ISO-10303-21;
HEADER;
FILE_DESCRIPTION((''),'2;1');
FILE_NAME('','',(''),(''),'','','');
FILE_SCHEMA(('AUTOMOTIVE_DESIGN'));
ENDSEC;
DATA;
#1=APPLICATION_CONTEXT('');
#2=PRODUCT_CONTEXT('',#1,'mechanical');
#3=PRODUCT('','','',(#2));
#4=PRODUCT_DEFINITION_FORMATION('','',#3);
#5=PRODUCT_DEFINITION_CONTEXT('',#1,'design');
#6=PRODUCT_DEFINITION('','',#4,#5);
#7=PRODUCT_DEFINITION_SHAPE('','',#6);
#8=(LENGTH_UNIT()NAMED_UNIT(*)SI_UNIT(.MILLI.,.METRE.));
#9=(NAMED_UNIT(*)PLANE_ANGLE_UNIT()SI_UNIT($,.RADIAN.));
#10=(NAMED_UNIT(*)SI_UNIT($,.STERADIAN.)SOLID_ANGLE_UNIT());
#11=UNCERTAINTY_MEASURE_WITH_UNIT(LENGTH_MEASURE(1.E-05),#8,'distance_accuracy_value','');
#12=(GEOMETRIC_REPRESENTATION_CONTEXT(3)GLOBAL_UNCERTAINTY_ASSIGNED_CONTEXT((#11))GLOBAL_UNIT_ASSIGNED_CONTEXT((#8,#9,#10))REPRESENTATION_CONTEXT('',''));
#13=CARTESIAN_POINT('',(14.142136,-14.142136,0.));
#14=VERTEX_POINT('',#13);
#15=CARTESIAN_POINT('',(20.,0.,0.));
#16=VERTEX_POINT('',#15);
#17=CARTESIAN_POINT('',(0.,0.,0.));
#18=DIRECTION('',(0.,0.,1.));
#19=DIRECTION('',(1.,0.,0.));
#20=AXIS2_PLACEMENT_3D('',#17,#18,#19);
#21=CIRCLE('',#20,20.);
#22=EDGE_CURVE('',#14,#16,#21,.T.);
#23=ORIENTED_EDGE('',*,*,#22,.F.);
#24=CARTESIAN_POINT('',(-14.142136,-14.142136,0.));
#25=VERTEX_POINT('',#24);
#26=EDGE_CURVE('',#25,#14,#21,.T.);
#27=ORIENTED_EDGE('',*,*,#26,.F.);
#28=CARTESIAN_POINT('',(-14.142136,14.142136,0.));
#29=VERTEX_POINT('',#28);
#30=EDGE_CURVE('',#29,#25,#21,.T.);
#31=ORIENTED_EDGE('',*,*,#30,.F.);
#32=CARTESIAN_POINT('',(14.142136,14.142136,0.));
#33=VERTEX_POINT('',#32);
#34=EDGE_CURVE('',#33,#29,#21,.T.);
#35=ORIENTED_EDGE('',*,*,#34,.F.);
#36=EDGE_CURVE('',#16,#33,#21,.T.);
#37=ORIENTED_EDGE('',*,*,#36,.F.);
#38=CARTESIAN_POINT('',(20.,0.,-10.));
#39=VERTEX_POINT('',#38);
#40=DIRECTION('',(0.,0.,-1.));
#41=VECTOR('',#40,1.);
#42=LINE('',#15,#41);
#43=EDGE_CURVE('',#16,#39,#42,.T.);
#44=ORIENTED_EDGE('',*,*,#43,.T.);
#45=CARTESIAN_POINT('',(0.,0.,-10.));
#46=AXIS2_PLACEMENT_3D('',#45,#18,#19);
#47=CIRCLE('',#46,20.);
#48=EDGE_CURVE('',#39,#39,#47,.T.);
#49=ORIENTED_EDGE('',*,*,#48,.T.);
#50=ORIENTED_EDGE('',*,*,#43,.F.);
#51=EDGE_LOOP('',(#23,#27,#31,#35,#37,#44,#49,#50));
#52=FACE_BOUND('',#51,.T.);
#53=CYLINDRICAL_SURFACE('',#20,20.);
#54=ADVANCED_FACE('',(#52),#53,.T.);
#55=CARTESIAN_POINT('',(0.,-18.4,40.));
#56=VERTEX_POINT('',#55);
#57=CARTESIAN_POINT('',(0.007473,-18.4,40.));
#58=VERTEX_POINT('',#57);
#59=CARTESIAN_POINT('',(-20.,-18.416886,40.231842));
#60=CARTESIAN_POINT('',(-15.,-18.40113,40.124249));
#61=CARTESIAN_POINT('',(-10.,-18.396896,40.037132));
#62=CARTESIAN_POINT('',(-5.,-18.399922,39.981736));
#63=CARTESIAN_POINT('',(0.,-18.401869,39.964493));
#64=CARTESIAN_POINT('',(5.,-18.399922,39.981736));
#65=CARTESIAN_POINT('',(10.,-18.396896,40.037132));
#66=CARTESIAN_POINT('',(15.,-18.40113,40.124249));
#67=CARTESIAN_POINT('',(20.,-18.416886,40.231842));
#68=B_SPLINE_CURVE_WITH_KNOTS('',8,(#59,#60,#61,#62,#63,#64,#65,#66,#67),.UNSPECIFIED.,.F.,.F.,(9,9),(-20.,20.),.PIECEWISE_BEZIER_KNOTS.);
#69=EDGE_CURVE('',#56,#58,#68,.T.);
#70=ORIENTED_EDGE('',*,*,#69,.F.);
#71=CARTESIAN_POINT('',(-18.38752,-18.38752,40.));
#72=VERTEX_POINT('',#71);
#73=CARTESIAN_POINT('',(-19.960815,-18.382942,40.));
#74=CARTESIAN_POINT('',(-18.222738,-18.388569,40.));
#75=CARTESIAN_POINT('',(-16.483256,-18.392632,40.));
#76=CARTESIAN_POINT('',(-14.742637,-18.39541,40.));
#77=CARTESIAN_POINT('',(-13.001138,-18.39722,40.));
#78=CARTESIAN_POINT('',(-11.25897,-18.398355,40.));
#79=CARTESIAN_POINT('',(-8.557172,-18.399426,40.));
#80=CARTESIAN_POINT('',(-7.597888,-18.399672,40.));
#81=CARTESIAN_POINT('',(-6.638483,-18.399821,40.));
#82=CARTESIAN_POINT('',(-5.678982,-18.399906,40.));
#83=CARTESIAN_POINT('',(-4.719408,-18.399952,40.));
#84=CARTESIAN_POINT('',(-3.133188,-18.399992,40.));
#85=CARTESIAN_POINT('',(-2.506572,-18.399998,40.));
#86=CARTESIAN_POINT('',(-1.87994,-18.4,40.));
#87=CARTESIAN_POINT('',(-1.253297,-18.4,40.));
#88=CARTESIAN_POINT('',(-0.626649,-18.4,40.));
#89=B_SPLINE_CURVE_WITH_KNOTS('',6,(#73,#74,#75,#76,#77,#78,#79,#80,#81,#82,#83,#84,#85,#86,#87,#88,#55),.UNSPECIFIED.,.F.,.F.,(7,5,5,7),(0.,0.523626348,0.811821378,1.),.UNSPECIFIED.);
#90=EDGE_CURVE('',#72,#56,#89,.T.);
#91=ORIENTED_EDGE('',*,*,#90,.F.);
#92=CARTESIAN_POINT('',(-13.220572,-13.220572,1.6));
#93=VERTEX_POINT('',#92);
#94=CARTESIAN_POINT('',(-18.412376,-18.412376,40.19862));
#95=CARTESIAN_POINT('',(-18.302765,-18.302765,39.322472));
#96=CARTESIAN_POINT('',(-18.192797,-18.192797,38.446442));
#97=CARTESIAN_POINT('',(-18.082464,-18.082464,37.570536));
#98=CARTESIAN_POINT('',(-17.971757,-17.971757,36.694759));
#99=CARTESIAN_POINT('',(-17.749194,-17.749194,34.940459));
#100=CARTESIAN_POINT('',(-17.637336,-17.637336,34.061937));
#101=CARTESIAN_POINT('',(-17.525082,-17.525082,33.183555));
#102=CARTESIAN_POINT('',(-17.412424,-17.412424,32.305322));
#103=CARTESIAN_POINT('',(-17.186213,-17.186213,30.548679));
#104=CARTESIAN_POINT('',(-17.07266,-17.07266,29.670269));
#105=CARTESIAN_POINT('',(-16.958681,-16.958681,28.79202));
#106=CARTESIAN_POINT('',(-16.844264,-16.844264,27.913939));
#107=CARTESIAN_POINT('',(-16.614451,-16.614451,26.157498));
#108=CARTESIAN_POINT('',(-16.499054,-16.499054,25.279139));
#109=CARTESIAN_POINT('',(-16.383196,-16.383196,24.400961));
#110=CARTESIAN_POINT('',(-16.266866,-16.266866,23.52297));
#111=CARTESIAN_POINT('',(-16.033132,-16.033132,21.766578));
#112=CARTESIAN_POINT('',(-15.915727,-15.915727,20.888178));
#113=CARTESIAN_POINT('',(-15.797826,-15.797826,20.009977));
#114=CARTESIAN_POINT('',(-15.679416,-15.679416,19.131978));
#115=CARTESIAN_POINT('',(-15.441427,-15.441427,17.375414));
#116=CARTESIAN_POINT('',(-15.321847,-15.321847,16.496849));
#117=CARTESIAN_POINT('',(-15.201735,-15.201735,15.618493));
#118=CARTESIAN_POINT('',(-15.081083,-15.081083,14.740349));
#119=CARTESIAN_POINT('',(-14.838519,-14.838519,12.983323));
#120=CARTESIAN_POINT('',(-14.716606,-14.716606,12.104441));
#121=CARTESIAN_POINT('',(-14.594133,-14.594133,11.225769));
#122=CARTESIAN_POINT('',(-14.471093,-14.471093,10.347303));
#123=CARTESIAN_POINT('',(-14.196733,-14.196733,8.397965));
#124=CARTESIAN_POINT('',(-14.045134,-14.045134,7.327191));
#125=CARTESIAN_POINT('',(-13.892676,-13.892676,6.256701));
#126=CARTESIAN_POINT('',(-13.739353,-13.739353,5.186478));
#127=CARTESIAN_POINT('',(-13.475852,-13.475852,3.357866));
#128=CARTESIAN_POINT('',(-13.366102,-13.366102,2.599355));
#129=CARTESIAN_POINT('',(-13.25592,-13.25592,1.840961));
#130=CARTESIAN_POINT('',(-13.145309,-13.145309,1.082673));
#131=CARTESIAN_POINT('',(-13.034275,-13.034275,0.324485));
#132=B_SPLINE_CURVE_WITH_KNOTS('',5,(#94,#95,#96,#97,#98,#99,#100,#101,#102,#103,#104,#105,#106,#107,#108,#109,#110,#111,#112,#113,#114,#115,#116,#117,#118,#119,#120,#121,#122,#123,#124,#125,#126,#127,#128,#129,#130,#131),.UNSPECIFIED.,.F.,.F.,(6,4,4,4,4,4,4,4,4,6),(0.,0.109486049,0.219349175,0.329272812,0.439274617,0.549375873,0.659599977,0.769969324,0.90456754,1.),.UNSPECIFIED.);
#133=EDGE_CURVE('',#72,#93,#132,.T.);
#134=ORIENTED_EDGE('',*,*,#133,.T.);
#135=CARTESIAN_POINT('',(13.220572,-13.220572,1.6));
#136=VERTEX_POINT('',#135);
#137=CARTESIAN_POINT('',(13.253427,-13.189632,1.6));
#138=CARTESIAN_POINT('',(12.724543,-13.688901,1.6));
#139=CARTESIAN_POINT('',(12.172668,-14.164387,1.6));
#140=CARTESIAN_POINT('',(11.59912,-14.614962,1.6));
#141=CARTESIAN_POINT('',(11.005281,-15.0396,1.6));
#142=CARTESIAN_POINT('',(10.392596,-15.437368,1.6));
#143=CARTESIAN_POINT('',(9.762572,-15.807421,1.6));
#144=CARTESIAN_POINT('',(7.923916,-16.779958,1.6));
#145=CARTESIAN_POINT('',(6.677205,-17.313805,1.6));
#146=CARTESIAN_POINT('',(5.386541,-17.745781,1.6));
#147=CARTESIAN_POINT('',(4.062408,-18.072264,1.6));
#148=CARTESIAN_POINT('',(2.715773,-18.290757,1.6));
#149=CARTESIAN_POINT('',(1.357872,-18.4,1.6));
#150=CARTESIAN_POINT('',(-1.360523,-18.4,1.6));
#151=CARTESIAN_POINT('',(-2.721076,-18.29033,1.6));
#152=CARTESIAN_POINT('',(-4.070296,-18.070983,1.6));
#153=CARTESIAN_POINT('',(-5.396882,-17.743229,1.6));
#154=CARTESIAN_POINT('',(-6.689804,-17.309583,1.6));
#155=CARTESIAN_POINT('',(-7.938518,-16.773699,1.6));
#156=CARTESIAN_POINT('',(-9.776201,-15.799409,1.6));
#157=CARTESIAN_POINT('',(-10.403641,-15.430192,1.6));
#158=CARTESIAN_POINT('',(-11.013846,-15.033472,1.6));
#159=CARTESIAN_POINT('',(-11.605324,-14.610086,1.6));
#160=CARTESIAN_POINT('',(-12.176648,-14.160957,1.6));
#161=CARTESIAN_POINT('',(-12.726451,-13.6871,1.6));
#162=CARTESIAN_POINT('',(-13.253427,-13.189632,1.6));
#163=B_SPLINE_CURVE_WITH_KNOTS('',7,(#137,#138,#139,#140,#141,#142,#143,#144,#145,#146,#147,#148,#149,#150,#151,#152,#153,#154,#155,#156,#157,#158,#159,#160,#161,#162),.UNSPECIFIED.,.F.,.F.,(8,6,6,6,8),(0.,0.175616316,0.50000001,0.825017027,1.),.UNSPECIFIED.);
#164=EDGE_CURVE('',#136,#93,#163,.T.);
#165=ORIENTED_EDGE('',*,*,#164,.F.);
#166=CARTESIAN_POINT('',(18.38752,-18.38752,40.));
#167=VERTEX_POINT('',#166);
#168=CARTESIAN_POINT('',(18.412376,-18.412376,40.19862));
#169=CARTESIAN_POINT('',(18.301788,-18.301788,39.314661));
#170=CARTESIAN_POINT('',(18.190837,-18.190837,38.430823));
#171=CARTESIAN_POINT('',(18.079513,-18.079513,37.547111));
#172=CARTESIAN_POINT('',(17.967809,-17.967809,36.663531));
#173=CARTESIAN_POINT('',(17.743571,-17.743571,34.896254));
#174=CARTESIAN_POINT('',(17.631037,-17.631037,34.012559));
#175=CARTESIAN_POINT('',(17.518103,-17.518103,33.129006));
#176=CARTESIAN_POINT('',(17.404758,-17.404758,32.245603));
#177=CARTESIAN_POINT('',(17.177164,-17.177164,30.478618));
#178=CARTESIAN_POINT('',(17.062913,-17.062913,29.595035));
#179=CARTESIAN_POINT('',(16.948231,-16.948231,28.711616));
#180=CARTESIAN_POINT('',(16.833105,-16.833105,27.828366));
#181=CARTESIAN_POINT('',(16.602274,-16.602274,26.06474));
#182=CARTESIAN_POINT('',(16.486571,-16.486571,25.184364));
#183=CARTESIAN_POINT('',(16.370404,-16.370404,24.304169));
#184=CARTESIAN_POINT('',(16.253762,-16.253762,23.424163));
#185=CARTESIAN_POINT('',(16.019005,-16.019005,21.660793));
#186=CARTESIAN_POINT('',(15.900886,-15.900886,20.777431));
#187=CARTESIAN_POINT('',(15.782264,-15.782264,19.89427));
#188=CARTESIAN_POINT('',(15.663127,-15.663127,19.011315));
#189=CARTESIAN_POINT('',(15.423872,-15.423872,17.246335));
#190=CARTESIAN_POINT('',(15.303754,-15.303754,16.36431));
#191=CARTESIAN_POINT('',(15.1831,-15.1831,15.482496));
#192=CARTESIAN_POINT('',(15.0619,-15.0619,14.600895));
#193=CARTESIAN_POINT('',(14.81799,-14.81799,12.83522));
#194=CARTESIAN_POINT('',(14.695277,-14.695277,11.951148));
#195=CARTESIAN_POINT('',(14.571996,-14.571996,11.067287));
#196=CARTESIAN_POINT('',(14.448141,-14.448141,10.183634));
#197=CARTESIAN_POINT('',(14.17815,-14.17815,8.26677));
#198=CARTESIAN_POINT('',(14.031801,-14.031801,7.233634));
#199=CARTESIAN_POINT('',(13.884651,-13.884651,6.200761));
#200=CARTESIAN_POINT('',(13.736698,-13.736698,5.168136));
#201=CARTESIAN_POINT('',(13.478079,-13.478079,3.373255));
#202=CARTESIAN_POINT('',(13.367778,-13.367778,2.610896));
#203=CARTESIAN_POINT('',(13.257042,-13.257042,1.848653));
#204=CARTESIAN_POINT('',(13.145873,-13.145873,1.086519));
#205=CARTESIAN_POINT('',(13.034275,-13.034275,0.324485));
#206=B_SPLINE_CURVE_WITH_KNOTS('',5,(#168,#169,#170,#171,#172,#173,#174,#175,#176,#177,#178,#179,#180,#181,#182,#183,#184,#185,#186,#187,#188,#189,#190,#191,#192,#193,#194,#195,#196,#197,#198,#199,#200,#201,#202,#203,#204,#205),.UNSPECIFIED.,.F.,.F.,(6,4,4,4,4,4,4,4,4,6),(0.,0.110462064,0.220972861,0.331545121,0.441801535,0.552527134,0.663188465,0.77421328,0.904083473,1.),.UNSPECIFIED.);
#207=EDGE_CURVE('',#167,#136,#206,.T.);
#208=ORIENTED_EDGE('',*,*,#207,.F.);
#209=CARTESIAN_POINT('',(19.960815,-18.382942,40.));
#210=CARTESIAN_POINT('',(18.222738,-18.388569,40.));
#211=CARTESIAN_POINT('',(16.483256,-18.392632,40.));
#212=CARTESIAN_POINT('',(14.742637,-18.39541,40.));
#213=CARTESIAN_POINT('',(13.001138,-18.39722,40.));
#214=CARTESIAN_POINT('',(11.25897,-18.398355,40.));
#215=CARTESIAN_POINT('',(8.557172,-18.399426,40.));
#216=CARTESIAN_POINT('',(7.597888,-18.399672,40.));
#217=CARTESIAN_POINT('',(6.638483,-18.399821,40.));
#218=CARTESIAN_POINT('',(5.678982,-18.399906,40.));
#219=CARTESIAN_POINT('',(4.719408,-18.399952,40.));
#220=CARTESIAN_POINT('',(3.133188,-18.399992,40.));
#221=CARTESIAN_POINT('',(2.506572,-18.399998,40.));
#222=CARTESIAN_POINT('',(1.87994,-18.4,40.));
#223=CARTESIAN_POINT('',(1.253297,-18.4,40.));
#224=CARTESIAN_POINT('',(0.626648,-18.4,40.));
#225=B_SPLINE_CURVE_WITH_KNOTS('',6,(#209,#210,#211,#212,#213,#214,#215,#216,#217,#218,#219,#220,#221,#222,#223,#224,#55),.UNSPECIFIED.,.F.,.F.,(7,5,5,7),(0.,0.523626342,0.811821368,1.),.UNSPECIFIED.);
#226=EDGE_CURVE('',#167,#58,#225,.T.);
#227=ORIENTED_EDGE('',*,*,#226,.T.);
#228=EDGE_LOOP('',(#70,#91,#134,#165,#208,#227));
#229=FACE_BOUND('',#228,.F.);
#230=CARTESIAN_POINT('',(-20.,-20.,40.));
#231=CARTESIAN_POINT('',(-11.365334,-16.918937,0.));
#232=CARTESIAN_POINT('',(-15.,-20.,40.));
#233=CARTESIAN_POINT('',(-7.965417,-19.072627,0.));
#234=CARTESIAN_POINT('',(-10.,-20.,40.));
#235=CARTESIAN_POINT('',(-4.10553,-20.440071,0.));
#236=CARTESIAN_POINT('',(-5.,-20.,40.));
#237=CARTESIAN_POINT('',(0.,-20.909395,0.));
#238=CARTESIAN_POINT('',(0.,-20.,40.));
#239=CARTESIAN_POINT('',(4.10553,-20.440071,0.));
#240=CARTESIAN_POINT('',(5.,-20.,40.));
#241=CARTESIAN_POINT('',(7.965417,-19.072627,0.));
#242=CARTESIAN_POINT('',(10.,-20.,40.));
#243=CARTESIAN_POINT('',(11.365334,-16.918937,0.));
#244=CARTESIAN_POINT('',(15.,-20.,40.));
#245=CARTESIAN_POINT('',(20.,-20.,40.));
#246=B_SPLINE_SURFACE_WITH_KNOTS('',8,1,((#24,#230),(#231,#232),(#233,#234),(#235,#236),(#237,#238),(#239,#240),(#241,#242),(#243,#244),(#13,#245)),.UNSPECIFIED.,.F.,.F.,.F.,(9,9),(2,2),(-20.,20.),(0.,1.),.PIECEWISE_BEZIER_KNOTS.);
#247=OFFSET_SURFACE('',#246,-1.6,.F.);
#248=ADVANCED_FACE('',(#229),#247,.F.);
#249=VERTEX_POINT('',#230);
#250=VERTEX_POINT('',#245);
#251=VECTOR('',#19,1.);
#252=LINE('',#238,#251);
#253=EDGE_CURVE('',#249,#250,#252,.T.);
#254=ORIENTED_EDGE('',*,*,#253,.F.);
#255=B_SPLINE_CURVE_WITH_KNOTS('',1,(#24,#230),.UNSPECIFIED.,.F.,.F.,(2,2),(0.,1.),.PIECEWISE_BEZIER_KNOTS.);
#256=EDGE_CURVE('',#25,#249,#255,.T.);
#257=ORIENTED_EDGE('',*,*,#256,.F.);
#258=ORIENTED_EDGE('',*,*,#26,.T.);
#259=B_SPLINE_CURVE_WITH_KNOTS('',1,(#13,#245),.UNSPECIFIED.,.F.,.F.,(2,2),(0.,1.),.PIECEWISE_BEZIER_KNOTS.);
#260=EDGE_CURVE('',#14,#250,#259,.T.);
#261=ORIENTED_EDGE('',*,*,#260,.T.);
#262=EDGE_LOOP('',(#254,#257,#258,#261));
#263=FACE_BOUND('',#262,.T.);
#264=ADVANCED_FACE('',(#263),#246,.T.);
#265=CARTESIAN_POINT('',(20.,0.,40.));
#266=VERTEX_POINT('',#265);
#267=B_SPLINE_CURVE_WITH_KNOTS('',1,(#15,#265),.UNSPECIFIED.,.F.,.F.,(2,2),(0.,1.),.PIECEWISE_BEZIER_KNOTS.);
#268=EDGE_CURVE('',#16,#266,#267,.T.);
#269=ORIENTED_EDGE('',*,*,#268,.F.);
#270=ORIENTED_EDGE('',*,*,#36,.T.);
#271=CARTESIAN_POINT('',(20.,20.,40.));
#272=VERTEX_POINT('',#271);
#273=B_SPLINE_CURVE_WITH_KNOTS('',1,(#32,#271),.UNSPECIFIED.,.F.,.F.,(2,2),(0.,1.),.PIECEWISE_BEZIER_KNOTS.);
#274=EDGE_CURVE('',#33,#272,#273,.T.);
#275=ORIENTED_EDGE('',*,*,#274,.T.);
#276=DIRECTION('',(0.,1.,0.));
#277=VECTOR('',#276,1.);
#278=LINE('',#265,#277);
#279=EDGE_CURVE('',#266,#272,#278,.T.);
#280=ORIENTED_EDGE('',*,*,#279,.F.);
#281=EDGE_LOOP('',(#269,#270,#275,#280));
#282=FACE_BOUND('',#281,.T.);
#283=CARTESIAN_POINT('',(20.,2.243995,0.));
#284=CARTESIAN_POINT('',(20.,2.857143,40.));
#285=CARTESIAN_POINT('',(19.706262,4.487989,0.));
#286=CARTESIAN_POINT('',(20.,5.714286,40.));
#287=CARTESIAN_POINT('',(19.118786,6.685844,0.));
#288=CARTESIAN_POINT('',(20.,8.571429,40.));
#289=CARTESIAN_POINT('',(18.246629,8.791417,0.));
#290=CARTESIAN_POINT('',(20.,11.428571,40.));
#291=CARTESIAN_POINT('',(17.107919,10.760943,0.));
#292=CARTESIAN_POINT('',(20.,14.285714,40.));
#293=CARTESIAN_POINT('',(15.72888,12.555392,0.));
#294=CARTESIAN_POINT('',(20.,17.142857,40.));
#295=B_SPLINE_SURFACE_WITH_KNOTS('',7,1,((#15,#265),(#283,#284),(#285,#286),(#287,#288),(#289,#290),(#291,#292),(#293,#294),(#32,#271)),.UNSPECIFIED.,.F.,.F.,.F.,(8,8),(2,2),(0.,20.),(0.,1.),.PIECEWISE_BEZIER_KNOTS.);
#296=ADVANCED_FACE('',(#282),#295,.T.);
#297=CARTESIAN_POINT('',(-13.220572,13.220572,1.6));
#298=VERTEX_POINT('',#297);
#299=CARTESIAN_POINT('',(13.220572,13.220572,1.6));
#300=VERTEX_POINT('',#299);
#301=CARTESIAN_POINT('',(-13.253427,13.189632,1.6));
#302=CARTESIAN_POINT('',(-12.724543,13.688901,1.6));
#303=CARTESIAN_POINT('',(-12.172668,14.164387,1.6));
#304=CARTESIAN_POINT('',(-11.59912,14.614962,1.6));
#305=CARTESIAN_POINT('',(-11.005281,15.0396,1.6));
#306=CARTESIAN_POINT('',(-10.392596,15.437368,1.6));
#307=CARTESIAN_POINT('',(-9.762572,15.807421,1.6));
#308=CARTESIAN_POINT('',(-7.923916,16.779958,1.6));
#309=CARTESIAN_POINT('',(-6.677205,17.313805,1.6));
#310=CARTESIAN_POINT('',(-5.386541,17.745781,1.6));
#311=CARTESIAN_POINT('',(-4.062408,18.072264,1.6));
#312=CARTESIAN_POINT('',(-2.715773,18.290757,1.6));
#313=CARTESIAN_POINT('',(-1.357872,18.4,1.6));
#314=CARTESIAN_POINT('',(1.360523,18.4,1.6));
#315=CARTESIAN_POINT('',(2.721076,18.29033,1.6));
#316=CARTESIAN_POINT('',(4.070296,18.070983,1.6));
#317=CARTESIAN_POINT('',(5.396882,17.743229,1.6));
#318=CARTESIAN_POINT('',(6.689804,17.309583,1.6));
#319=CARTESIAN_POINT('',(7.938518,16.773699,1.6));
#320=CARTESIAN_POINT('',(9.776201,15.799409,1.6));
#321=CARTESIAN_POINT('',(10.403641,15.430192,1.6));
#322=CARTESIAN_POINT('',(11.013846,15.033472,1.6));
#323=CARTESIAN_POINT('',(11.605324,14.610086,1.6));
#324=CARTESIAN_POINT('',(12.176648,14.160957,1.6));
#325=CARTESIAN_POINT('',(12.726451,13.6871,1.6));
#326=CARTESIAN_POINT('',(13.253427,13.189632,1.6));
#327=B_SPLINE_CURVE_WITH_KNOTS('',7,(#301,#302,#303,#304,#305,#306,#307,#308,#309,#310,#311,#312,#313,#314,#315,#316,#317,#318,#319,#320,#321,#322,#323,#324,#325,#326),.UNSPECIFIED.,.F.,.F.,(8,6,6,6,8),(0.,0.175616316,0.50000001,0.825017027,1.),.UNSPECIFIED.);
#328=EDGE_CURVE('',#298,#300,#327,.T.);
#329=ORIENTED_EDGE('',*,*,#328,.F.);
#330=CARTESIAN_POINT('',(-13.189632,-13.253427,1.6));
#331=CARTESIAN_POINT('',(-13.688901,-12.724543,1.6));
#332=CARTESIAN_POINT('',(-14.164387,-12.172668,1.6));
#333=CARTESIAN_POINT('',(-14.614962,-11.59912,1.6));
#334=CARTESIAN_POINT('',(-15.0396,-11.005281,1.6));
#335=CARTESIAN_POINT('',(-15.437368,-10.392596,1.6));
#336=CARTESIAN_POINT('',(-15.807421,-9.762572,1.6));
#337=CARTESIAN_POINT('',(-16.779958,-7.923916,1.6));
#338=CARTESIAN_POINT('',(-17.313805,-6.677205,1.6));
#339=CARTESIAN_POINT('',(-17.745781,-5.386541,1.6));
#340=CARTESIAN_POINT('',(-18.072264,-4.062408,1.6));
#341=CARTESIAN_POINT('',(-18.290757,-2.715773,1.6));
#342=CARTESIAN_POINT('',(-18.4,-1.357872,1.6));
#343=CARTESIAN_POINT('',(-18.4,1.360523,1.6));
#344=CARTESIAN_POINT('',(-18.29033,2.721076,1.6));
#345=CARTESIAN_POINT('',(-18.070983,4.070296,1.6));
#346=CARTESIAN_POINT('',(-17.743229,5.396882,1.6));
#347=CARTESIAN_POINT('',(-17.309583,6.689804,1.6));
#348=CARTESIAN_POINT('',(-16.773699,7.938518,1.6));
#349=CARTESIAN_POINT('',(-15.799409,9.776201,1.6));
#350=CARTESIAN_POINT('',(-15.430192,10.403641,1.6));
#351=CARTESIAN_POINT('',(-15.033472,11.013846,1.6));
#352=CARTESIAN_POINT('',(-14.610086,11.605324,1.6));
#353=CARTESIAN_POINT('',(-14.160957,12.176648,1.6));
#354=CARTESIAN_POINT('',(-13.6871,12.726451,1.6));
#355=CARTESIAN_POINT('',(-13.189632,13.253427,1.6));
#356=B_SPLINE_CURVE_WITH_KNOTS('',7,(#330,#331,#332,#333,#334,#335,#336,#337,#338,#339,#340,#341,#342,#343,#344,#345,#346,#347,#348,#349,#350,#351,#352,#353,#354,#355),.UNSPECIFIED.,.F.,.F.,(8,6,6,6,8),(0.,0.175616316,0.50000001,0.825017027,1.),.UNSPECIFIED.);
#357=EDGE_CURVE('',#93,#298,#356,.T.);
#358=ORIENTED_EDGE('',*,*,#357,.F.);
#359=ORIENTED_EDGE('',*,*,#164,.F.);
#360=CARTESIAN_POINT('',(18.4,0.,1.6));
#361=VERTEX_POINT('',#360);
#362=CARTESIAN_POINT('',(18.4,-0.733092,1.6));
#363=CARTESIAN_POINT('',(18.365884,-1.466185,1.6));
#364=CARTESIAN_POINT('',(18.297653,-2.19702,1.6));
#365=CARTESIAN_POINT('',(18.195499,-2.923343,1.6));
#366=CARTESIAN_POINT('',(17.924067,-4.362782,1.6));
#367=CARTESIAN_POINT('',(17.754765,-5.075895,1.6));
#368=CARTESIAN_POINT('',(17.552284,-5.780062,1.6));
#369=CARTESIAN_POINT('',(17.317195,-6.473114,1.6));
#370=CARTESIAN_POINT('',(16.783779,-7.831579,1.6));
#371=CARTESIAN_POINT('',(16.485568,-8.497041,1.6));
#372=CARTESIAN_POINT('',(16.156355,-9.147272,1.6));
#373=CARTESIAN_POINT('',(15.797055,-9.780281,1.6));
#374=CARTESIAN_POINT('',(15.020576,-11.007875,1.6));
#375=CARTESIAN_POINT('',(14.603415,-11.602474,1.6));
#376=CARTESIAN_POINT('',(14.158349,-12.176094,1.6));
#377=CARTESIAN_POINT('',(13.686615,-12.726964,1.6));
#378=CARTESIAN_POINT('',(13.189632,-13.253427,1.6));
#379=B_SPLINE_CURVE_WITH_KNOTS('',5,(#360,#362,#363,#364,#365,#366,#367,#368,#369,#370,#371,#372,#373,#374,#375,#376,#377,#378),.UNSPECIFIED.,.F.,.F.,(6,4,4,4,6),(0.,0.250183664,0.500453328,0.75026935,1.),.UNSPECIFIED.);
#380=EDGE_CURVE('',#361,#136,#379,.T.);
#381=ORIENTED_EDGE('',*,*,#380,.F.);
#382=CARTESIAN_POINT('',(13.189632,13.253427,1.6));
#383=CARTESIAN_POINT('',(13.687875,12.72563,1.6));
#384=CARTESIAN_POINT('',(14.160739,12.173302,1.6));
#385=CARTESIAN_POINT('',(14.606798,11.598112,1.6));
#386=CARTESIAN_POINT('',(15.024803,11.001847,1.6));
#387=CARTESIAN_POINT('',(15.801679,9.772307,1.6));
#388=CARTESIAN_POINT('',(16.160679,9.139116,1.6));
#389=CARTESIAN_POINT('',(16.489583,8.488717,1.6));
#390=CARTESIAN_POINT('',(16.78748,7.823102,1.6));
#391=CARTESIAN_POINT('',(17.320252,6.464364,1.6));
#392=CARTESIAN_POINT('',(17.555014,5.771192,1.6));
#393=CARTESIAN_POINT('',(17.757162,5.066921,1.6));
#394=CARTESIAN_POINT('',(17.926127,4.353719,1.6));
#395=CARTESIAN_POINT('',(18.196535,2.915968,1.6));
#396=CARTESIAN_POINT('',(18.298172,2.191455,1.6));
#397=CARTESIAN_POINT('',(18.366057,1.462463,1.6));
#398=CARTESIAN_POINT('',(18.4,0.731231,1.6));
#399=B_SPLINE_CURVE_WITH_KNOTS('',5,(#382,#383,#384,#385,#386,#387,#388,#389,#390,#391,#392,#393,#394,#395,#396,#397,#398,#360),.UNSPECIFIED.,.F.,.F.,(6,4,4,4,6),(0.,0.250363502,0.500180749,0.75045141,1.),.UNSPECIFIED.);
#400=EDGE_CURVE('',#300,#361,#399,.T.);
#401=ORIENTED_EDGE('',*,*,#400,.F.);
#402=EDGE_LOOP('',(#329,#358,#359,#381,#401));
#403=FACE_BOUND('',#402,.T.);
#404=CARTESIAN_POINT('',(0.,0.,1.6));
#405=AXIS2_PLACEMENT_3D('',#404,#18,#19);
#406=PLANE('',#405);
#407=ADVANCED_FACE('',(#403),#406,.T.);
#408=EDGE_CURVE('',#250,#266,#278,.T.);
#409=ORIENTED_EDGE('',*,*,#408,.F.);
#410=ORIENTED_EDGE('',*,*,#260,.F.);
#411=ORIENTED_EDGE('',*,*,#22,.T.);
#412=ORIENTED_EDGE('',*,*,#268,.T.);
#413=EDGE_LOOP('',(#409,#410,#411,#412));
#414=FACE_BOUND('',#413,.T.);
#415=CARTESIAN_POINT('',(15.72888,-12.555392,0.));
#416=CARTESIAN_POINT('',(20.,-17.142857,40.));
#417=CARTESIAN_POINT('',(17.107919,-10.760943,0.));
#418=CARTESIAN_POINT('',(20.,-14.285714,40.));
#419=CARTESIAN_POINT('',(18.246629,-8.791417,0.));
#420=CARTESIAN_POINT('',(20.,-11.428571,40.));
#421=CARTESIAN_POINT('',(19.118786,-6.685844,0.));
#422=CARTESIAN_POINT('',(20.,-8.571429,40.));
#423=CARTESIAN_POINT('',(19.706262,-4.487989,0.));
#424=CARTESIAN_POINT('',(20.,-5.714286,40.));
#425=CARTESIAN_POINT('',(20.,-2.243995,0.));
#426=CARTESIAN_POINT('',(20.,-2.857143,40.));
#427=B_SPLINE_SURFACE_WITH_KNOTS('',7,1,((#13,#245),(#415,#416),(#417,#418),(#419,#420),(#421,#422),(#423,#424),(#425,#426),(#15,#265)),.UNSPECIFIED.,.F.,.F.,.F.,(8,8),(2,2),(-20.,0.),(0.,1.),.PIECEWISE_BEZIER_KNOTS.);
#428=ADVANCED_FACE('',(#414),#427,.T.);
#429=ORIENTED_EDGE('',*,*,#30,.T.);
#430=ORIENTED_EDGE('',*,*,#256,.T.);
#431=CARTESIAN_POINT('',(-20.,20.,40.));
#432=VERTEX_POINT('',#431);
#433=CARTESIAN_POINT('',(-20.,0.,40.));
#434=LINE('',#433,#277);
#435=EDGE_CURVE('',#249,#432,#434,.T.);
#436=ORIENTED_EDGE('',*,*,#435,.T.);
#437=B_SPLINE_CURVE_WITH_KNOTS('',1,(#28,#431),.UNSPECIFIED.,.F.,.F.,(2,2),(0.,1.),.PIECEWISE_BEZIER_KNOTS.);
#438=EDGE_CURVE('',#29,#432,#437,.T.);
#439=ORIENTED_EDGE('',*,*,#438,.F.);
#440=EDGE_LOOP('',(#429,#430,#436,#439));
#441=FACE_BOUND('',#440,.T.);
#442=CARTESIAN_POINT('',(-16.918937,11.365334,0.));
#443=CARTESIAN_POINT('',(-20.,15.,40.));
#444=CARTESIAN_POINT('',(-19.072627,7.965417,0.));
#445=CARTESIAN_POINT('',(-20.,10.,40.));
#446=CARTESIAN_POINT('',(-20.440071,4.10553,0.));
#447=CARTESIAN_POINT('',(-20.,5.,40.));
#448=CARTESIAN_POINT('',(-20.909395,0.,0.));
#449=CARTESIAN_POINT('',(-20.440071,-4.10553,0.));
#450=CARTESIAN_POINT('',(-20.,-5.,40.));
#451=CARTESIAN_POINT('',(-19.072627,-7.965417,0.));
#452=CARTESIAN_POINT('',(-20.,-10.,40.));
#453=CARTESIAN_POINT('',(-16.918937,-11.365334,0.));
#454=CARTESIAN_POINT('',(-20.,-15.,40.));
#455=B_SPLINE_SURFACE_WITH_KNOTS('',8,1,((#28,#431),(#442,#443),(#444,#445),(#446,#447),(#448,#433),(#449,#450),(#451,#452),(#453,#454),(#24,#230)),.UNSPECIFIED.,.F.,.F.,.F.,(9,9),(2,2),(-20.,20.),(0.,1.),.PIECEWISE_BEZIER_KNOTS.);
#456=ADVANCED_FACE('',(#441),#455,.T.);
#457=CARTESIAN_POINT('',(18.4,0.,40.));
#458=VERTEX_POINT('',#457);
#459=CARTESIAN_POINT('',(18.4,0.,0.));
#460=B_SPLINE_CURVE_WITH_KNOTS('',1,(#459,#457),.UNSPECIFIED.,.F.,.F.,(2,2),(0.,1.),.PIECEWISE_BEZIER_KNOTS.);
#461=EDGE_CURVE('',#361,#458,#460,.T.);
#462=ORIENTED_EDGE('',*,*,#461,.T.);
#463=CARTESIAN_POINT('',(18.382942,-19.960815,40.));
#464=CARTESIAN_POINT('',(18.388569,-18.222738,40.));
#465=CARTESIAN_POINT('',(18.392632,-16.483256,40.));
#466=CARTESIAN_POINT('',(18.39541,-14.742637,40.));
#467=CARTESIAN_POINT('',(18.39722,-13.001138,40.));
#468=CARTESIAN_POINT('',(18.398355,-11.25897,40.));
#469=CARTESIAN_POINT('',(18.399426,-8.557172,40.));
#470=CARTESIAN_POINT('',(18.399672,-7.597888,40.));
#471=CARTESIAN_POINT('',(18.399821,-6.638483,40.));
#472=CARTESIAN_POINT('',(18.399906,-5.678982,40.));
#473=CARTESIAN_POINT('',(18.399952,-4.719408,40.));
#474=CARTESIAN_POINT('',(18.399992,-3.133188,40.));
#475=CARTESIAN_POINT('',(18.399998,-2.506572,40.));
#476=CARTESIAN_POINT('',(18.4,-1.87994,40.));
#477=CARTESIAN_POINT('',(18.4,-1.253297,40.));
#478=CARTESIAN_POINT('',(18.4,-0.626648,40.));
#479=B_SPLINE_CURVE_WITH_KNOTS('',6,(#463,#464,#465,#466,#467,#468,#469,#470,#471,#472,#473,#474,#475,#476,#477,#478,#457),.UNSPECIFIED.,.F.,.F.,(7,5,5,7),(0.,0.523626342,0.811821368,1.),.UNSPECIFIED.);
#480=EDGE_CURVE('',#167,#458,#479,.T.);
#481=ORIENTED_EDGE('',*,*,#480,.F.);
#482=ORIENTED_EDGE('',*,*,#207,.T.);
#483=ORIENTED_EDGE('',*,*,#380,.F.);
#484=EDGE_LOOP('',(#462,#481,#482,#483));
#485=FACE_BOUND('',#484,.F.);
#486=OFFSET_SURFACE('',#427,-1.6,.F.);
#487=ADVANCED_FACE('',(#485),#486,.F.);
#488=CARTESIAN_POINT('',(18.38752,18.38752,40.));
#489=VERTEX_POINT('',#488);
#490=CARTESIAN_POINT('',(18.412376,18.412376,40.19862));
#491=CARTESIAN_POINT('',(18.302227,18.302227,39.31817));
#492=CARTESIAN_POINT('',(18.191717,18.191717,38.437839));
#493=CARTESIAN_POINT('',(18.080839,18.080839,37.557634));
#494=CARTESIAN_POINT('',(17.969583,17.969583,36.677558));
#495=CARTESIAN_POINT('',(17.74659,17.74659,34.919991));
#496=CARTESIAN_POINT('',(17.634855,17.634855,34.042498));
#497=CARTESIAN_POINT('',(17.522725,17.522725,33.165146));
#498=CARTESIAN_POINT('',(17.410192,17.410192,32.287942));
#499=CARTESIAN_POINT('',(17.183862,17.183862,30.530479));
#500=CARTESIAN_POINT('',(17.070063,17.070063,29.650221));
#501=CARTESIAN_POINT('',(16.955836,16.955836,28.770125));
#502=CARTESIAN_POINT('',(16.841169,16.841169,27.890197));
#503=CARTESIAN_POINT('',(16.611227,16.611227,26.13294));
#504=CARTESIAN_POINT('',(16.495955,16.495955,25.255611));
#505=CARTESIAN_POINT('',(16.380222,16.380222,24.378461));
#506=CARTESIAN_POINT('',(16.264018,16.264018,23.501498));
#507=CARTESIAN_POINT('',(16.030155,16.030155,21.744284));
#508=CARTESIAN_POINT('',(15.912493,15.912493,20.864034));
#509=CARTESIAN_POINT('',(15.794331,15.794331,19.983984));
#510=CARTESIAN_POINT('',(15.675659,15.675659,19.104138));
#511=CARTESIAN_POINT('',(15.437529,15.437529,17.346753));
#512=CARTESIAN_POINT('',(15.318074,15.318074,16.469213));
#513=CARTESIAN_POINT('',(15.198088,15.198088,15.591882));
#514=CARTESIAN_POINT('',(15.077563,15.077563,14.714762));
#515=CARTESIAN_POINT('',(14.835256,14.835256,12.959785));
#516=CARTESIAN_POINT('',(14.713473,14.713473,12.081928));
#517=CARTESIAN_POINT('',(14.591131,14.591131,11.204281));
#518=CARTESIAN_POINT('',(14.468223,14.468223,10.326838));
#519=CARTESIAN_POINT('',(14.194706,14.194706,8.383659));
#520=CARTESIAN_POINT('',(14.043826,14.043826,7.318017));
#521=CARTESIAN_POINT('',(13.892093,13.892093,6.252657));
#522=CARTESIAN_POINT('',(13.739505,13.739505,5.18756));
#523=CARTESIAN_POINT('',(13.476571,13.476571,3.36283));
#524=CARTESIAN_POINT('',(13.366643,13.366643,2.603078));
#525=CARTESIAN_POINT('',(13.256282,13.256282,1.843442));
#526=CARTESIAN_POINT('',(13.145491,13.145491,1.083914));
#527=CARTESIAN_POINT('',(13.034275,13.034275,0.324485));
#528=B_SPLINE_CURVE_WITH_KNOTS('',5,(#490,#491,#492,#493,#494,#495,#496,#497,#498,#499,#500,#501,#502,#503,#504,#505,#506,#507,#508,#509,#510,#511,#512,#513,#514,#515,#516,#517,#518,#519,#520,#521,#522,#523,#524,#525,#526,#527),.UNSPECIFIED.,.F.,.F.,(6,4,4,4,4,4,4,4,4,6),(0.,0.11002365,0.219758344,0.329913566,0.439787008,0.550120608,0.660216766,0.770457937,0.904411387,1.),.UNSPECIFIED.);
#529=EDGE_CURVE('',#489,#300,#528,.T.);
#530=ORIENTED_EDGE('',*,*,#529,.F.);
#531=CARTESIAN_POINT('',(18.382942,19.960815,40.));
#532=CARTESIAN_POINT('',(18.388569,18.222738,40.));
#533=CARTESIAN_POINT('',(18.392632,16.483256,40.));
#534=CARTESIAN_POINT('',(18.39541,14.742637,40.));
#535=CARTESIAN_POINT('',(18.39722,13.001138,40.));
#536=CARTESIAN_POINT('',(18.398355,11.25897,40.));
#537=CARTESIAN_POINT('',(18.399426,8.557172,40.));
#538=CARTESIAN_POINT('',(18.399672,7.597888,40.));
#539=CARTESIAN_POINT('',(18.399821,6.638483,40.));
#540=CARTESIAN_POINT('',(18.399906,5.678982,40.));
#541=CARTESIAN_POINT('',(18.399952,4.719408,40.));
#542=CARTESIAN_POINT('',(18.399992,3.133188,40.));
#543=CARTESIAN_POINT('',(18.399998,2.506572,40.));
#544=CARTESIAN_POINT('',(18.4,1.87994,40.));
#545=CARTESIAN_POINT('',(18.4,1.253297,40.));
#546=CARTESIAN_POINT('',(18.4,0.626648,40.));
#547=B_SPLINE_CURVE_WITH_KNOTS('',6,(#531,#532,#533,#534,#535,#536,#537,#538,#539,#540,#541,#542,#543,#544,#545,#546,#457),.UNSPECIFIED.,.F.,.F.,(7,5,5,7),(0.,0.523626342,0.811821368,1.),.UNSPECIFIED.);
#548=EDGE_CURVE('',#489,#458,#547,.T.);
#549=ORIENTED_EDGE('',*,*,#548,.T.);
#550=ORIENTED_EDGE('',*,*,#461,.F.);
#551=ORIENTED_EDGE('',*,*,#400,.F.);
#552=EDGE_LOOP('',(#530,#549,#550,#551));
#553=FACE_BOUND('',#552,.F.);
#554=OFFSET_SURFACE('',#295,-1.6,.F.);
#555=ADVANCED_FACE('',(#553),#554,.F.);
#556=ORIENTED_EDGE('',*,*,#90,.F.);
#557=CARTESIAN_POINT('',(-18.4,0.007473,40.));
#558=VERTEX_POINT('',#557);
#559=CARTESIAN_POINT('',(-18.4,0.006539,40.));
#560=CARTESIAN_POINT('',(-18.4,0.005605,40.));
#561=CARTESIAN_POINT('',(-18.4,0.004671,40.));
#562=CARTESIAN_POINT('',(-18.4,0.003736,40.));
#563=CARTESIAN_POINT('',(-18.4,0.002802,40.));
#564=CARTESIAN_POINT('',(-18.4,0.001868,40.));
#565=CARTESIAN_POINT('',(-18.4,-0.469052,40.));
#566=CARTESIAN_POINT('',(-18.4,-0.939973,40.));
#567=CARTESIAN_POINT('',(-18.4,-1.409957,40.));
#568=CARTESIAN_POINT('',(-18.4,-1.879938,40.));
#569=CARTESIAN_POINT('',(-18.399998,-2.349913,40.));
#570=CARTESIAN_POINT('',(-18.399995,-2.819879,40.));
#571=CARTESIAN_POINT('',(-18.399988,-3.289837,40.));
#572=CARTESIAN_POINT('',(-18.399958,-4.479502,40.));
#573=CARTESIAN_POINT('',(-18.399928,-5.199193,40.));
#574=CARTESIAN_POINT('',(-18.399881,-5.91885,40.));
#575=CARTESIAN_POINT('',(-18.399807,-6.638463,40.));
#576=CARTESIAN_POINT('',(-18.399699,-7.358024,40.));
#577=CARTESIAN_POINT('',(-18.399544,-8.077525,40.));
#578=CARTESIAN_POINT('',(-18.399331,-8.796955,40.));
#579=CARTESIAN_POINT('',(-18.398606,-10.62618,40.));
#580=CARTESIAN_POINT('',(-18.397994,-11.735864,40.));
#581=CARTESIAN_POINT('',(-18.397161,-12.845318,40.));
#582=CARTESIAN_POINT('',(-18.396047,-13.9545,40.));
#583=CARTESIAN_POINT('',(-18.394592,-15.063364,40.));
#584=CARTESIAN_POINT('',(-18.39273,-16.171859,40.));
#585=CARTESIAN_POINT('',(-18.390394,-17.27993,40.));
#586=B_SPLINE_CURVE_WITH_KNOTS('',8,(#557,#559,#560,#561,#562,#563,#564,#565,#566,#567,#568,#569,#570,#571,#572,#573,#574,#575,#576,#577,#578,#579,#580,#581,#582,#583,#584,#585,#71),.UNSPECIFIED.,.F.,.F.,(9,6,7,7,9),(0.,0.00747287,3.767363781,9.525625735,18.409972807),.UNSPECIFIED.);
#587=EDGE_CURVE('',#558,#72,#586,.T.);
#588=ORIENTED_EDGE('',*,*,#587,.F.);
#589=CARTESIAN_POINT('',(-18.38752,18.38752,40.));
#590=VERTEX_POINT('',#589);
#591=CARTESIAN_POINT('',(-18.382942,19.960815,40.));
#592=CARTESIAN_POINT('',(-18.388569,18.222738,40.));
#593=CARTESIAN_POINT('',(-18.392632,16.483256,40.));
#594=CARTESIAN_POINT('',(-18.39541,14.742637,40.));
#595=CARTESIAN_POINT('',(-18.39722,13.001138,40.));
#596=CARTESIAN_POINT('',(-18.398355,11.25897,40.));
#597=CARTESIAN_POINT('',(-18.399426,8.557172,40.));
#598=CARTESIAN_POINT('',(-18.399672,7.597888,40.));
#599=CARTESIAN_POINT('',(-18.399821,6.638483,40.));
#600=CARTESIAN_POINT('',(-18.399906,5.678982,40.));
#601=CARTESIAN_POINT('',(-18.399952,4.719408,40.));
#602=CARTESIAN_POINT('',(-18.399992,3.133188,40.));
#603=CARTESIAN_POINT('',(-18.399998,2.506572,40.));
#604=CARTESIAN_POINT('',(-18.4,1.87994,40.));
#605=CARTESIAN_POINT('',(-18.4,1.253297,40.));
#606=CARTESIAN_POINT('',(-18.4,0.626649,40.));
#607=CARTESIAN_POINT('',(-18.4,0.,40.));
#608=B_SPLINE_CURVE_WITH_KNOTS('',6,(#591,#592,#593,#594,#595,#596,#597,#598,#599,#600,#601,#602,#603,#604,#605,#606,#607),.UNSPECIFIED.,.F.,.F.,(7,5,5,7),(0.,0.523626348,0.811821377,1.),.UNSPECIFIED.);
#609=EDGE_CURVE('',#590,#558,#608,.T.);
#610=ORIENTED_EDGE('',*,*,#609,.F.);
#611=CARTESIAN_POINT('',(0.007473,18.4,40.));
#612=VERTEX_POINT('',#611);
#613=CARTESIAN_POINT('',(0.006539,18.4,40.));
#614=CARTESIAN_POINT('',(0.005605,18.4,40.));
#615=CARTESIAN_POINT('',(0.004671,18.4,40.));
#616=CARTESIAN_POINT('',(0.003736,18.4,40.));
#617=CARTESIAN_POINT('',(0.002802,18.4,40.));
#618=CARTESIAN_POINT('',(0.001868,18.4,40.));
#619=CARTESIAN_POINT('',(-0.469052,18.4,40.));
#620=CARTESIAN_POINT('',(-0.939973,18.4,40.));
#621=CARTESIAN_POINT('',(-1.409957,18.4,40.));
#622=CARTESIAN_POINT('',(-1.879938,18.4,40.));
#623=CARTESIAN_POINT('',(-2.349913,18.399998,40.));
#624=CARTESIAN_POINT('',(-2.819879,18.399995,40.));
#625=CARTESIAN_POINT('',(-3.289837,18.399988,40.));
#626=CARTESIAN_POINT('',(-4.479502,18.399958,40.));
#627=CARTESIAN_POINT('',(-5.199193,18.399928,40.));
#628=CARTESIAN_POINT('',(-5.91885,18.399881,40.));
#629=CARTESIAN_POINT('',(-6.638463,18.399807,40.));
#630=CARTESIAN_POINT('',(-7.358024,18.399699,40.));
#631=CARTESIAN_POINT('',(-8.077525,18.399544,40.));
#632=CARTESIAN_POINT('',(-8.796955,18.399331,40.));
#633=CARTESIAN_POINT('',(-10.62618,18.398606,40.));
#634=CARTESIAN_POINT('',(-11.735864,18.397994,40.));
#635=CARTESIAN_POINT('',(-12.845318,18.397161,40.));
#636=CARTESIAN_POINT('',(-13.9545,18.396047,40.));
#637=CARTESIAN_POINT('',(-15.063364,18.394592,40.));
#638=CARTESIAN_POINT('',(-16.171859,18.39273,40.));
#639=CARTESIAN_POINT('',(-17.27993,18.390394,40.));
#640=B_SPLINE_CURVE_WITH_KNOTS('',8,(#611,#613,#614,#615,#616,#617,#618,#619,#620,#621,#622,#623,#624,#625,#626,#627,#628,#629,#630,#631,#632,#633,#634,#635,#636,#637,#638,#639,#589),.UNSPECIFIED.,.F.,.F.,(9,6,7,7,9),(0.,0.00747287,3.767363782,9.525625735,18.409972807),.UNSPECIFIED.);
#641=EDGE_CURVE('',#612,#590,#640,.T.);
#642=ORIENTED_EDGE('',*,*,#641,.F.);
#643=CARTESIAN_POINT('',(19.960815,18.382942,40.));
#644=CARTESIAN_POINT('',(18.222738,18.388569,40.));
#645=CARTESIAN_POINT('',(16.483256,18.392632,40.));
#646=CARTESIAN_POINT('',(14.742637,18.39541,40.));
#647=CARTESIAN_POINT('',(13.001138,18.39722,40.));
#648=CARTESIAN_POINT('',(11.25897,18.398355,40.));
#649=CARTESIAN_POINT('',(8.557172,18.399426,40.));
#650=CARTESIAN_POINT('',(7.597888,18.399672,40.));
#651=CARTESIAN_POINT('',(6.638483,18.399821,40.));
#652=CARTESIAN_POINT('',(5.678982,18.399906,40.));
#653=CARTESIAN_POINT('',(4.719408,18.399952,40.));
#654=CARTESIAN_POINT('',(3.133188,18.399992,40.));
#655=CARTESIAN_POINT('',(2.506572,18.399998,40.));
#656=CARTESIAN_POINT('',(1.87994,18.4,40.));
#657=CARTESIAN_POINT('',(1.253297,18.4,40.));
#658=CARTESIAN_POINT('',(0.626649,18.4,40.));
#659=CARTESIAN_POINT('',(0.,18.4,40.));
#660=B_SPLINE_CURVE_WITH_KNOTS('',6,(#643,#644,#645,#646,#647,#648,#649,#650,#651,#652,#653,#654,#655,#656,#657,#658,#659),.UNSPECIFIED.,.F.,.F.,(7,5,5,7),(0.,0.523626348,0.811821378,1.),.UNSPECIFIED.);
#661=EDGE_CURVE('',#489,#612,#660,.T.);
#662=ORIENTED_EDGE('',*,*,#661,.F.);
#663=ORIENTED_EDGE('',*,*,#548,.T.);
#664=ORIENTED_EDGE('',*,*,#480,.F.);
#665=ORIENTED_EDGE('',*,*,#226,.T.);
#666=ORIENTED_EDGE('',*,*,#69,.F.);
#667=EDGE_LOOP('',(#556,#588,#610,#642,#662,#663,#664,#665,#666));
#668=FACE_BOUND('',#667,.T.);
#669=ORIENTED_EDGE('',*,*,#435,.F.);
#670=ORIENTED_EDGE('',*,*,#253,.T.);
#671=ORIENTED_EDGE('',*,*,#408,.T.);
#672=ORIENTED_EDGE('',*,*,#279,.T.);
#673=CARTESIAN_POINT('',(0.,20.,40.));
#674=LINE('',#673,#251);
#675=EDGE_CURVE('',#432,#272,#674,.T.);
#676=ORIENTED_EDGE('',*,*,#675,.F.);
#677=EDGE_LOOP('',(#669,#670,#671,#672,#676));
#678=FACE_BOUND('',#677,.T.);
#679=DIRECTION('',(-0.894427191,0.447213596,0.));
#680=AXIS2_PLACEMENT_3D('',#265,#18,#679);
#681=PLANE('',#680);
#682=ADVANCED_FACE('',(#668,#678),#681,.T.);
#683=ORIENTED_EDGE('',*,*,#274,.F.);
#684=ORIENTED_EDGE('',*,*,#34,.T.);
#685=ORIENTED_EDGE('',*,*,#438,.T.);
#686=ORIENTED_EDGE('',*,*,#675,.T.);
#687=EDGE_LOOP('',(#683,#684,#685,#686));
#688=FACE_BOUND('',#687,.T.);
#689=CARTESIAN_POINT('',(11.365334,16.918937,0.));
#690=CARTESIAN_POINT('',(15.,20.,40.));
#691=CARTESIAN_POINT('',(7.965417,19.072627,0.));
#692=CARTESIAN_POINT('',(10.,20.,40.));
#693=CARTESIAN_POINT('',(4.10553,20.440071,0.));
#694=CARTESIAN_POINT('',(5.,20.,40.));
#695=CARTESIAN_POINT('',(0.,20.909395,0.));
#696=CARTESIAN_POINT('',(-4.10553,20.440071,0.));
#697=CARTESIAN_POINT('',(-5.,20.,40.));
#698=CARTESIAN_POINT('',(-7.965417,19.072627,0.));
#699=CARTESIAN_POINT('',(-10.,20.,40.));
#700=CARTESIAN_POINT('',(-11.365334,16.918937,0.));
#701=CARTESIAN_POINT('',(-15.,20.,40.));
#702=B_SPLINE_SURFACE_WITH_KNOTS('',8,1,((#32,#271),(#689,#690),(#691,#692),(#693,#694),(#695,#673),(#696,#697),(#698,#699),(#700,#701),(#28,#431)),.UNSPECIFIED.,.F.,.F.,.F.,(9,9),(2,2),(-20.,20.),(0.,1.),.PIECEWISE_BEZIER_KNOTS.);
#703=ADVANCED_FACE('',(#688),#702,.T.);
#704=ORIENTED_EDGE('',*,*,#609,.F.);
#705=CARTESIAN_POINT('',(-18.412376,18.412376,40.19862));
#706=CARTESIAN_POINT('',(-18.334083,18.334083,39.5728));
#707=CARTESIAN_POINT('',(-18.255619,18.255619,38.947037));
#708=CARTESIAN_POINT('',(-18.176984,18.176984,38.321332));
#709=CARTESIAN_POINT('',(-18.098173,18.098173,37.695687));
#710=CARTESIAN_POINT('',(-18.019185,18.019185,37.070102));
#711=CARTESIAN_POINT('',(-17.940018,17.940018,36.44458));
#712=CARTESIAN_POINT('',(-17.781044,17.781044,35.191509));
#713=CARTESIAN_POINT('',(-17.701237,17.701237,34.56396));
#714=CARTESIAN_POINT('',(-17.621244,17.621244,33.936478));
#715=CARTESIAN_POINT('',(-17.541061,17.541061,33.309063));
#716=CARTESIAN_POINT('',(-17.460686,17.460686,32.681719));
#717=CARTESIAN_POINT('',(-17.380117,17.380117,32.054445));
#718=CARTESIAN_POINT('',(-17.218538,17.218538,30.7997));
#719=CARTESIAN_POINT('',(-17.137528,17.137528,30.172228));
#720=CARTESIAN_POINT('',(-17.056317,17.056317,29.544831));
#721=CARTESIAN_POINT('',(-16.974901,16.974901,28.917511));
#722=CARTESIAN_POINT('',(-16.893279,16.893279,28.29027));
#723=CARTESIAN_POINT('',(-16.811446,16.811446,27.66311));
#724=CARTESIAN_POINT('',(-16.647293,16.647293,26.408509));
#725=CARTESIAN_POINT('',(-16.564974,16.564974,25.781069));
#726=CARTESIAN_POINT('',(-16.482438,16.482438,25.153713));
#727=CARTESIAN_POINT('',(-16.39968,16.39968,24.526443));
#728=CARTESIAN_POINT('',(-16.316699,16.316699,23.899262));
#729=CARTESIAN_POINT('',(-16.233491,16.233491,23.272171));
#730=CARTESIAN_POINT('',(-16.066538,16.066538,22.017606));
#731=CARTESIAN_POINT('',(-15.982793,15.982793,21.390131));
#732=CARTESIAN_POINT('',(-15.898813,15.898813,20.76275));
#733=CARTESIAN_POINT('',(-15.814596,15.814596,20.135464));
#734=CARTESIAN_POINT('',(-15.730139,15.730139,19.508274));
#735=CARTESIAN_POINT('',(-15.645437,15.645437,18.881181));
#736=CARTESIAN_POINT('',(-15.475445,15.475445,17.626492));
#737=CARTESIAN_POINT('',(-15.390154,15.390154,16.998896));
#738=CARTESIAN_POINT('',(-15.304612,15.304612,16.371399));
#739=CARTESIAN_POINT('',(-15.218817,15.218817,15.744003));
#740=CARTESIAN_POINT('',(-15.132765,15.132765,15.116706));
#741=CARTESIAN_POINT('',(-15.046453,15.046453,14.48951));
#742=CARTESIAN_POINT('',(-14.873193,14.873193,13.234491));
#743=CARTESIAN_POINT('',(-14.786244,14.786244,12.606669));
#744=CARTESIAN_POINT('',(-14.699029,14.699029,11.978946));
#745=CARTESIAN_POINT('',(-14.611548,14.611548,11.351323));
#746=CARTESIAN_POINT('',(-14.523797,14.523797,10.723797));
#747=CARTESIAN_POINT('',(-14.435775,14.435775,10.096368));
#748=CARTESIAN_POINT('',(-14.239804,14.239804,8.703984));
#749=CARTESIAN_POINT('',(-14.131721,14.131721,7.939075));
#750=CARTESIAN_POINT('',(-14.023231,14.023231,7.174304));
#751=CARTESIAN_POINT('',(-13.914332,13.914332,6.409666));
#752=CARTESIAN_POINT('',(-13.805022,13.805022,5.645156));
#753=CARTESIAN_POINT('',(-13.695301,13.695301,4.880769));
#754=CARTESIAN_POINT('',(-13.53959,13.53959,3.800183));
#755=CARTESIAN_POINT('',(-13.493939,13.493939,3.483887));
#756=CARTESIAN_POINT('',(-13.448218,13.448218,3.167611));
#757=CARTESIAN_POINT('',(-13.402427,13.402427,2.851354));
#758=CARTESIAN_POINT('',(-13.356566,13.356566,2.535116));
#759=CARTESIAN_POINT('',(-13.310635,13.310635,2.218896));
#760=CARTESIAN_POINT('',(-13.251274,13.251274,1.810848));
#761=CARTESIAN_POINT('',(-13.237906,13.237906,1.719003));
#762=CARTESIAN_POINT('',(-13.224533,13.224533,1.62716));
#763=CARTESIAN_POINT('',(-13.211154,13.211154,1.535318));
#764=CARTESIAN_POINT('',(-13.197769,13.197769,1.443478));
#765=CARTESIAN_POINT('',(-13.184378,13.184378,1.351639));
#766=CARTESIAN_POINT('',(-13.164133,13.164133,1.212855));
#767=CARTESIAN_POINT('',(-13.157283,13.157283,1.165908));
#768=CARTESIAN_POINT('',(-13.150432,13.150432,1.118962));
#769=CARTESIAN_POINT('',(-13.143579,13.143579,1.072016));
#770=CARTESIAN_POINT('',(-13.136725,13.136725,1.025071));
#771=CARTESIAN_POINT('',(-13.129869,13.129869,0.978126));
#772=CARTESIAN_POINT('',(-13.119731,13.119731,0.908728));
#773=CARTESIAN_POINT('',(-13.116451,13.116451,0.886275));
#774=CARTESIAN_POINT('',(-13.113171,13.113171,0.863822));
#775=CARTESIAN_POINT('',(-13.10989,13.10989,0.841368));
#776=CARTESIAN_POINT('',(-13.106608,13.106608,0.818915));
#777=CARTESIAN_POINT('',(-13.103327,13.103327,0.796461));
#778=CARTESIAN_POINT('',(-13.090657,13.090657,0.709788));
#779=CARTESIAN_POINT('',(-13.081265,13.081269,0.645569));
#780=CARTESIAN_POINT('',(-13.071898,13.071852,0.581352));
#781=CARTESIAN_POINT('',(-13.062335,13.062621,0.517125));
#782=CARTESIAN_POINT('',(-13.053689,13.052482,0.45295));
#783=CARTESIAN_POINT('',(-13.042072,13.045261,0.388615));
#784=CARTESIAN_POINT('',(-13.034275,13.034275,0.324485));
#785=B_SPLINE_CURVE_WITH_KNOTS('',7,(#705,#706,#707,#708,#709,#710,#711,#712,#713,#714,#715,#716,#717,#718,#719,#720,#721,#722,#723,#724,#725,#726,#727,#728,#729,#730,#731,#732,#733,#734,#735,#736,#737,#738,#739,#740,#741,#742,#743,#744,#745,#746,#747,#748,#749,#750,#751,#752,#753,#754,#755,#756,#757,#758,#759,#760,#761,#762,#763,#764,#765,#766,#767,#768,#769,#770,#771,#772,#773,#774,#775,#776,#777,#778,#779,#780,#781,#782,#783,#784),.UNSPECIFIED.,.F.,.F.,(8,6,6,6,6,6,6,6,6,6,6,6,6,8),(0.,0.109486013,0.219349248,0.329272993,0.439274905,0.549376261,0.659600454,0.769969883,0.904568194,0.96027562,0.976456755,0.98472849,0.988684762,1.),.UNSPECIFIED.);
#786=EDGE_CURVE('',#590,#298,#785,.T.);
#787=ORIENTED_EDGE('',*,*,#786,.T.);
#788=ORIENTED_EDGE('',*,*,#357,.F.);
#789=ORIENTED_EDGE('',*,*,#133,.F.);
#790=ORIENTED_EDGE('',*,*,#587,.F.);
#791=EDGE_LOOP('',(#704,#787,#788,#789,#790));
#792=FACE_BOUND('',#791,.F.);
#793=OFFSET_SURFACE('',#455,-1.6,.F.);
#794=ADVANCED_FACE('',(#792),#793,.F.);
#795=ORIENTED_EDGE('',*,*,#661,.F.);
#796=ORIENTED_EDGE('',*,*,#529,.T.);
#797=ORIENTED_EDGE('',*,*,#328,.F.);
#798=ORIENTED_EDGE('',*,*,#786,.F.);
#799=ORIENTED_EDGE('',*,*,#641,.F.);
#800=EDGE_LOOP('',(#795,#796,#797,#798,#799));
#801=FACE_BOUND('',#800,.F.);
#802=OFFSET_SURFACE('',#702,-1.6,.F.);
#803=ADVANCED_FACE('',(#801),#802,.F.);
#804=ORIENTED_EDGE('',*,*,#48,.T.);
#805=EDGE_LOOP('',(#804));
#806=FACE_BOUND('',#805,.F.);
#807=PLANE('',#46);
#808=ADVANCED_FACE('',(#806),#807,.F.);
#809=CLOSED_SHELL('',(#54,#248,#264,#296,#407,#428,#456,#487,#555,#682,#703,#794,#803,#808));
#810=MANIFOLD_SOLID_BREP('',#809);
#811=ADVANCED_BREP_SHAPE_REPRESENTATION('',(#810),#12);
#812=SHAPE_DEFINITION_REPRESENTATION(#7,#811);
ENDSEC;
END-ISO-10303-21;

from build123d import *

# Parameters (mm, degrees)
F0_R     = 20
F2_W     = 40
F2_H     = 40
F4_T     = 1.6
F5_DEPTH = 10


# Not quite as in the source:
# - a shell that OpenCascade refuses in one call is made with other operations: the cavity is built on its own and cut out


with BuildPart() as f3:
    # F0 (on Top) → F3 section 0
    with BuildSketch(Plane.XY):
        Circle(F0_R)
    # F2 (on offset) → F3 section 1
    with BuildSketch(Plane.XY.offset(40)):
        Rectangle(F2_W, F2_H)
    loft()

    # F4: shell of thickness 1.6, made by hand


with BuildPart() as f4_core1:
    # F4_t2: copy of F3
    add(f3.part)

    # the walls: a layer under each face that stays
    f4_faces = [f4_core1.faces().sort_by_distance(p)[0] for p in [
        (19.2387953231, 8.8268343228, 20),
        (0, 19.9999999992, 20),
        (-19.9999999992, 0, 20),
        (0, -19.9999999992, 20),
        (19.2387953231, -8.8268343228, 20),
        (0, 0, 0),
    ]]
    thicken(f4_faces, amount=-F4_T, mode=Mode.SUBTRACT)


with BuildPart() as f3_1:
    add(f3.part)

    # what is left inside the walls is the cavity
    f4_cavity = [f4_core1.part.solids().sort_by_distance(p)[0] for p in [
        (3.677504, 7.355008, 39.984),
    ]]
    add(f4_cavity, mode=Mode.SUBTRACT)

    # F0 (on Top) → F5 (join)
    with BuildSketch(Plane.XY):
        Circle(F0_R)
    extrude(amount=-F5_DEPTH)


solid = f3_1.part
